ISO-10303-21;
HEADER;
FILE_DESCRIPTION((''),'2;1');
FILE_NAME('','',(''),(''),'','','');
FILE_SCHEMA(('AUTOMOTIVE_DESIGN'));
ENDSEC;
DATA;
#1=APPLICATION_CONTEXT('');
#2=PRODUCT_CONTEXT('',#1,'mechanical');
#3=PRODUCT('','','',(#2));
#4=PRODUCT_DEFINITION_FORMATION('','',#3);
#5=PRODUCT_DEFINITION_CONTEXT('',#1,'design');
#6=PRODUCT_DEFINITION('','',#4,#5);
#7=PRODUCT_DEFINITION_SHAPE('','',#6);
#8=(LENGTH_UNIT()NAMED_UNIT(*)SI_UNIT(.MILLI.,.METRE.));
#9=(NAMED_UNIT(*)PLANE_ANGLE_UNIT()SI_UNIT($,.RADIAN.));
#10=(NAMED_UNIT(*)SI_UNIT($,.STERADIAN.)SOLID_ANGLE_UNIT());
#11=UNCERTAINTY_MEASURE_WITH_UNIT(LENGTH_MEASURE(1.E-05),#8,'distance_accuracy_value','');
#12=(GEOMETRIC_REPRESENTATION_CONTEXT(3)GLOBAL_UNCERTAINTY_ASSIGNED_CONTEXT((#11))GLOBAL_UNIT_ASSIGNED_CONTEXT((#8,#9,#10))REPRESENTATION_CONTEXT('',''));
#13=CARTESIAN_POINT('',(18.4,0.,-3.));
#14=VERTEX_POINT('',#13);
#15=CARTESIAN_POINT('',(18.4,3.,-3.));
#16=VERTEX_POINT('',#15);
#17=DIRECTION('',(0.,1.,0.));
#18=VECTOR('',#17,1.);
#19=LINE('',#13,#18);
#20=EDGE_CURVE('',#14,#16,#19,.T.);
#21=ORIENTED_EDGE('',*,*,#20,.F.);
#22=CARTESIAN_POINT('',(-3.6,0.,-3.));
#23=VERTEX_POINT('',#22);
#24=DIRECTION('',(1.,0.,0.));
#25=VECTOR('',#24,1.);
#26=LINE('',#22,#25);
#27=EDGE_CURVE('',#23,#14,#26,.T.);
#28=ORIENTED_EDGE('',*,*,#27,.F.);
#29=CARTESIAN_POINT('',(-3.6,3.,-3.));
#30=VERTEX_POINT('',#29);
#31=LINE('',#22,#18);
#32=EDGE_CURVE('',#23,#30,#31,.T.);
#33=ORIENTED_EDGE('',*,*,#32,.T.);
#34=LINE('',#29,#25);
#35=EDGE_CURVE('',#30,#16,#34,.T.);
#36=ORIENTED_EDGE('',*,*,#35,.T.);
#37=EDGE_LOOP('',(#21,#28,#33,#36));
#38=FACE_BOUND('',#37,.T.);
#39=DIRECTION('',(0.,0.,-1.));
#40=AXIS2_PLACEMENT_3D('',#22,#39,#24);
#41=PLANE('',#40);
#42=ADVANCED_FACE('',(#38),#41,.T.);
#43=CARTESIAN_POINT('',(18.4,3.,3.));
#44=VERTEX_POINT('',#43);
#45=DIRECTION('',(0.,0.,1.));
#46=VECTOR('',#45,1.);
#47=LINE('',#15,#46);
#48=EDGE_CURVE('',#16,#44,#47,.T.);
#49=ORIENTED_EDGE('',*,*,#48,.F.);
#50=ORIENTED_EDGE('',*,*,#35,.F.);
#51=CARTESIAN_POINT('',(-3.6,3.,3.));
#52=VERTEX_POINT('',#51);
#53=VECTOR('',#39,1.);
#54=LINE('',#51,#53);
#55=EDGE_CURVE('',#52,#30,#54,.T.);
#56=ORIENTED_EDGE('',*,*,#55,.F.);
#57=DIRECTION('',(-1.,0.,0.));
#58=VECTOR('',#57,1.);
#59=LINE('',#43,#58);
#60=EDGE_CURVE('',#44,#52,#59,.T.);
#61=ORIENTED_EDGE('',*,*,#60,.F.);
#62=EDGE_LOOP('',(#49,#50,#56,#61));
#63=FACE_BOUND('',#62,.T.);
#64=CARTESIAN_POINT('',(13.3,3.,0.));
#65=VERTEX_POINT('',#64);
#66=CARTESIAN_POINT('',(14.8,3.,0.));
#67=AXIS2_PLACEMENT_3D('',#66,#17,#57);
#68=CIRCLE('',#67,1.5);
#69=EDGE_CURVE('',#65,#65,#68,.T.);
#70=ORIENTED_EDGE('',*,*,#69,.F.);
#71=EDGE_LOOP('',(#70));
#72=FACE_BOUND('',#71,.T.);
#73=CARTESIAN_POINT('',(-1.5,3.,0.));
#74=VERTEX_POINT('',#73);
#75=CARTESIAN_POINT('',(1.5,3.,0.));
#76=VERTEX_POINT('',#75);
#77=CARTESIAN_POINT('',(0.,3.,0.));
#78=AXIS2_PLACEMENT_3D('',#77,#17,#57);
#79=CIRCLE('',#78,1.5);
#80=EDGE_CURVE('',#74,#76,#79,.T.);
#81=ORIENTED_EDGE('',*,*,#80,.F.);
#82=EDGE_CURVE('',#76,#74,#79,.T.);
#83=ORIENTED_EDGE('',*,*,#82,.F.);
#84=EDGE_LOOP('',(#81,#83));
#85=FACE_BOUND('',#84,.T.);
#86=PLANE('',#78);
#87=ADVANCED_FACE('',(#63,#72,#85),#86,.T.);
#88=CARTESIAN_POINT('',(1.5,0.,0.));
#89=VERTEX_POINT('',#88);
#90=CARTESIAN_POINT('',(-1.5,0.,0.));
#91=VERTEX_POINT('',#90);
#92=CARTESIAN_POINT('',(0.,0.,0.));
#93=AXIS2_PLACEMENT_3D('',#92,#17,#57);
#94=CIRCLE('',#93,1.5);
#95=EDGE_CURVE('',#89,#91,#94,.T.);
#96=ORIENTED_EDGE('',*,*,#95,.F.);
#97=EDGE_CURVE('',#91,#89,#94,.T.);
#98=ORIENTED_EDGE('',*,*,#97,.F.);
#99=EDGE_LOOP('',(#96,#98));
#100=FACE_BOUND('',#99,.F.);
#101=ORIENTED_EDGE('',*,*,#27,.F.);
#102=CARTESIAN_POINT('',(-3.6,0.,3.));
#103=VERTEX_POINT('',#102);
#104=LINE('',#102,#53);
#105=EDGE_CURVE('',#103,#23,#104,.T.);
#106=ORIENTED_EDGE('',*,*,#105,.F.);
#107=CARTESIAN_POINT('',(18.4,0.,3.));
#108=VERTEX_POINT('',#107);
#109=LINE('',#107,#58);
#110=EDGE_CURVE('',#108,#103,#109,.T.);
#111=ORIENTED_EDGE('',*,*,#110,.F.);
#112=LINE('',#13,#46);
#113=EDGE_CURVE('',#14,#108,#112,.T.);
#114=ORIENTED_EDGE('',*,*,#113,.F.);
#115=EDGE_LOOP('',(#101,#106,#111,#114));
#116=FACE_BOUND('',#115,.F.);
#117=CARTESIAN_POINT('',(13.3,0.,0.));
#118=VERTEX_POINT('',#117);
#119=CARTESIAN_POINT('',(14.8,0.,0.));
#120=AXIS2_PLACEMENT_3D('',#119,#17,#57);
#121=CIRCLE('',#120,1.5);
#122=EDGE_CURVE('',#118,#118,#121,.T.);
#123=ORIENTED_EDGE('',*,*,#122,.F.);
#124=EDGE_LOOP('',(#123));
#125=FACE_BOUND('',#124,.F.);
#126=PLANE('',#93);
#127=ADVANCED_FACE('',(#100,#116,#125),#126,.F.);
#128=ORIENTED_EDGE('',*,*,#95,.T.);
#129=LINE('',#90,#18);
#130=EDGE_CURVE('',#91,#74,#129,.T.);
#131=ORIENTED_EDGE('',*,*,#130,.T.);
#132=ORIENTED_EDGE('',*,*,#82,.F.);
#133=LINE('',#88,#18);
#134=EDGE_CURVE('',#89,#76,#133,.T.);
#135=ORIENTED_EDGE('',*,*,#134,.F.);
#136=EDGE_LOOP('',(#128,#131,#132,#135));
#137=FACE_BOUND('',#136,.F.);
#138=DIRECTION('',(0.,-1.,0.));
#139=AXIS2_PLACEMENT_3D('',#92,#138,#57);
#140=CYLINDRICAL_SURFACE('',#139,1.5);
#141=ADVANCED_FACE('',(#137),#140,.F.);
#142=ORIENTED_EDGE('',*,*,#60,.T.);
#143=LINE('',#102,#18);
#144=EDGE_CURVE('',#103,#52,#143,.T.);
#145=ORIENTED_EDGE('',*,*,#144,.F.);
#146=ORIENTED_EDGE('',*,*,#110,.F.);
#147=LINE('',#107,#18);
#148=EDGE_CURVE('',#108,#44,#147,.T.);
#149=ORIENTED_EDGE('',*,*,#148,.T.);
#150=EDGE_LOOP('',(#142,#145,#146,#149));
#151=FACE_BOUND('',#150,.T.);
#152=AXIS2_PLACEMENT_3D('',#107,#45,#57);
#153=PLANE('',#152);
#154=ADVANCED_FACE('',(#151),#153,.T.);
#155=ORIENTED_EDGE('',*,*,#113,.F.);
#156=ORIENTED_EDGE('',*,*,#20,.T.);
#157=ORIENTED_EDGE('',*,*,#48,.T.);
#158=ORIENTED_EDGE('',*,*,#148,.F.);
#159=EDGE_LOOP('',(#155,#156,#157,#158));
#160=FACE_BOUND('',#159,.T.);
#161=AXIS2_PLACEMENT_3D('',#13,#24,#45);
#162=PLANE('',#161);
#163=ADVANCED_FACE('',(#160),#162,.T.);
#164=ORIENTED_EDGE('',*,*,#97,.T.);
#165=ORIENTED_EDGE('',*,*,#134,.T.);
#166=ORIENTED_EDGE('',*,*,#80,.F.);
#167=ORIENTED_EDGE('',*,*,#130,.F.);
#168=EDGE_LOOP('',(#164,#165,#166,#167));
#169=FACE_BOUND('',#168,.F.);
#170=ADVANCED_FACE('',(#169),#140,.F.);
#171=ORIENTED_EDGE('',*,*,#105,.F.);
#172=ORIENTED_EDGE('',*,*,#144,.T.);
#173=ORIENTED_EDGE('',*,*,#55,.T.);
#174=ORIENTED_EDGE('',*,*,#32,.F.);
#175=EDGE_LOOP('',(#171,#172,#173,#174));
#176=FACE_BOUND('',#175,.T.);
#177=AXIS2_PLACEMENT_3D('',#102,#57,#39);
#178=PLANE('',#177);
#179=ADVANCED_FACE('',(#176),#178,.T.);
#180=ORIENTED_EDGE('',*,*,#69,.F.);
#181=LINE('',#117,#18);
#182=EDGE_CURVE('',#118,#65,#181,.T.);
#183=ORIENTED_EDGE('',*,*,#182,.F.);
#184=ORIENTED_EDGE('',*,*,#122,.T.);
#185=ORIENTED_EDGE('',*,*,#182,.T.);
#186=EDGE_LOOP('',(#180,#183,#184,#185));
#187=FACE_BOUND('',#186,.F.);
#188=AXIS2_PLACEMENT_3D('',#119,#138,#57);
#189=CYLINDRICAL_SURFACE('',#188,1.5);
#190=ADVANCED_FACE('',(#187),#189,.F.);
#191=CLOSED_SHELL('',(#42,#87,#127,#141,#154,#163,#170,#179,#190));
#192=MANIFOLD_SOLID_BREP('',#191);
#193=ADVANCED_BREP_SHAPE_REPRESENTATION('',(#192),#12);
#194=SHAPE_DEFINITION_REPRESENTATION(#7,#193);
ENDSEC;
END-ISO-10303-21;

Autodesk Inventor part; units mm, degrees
ref_plane "YZ Plane" through (0, 0, 0) normal (1, 0, 0) x (0, 1, 0)
ref_plane "XZ Plane" through (0, 0, 0) normal (0, 1, 0) x (-1, 0, 0)
ref_plane "XY Plane" through (0, 0, 0) normal (0, 0, 1) x (1, 0, 0)
sketch "スケッチ1" plane through (0, 0, 0) normal (0, 1, 0) x (-1, 0, 0)
  line L0 (0, 0) -> (-14.8, 0)
  circle A0 centre (-14.8, 0) radius 1.5
  circle A1 centre (0, 0) radius 1.5
  line L1 (-18.4, 3) -> (3.6, 3)
  line L2 (3.6, 3) -> (3.6, -3)
  line L3 (3.6, -3) -> (-18.4, -3)
  line L4 (-18.4, -3) -> (-18.4, 3)
  line L5 (-18.4, 3) -> (3.6, -3) construction
  line L6 (3.6, 3) -> (-18.4, -3) construction
  point P0 (-7.4, 0)
  dimension "d0" = 14.8
  dimension "d1" = 3
  dimension "d2" = 3
  dimension "d3" = 22
  dimension "d4" = 6
extrude "押し出し1" add sketch "スケッチ1" along normal blind 3
properties part number "知能ロボコン砲身止め" material "ABS プラスチック"
